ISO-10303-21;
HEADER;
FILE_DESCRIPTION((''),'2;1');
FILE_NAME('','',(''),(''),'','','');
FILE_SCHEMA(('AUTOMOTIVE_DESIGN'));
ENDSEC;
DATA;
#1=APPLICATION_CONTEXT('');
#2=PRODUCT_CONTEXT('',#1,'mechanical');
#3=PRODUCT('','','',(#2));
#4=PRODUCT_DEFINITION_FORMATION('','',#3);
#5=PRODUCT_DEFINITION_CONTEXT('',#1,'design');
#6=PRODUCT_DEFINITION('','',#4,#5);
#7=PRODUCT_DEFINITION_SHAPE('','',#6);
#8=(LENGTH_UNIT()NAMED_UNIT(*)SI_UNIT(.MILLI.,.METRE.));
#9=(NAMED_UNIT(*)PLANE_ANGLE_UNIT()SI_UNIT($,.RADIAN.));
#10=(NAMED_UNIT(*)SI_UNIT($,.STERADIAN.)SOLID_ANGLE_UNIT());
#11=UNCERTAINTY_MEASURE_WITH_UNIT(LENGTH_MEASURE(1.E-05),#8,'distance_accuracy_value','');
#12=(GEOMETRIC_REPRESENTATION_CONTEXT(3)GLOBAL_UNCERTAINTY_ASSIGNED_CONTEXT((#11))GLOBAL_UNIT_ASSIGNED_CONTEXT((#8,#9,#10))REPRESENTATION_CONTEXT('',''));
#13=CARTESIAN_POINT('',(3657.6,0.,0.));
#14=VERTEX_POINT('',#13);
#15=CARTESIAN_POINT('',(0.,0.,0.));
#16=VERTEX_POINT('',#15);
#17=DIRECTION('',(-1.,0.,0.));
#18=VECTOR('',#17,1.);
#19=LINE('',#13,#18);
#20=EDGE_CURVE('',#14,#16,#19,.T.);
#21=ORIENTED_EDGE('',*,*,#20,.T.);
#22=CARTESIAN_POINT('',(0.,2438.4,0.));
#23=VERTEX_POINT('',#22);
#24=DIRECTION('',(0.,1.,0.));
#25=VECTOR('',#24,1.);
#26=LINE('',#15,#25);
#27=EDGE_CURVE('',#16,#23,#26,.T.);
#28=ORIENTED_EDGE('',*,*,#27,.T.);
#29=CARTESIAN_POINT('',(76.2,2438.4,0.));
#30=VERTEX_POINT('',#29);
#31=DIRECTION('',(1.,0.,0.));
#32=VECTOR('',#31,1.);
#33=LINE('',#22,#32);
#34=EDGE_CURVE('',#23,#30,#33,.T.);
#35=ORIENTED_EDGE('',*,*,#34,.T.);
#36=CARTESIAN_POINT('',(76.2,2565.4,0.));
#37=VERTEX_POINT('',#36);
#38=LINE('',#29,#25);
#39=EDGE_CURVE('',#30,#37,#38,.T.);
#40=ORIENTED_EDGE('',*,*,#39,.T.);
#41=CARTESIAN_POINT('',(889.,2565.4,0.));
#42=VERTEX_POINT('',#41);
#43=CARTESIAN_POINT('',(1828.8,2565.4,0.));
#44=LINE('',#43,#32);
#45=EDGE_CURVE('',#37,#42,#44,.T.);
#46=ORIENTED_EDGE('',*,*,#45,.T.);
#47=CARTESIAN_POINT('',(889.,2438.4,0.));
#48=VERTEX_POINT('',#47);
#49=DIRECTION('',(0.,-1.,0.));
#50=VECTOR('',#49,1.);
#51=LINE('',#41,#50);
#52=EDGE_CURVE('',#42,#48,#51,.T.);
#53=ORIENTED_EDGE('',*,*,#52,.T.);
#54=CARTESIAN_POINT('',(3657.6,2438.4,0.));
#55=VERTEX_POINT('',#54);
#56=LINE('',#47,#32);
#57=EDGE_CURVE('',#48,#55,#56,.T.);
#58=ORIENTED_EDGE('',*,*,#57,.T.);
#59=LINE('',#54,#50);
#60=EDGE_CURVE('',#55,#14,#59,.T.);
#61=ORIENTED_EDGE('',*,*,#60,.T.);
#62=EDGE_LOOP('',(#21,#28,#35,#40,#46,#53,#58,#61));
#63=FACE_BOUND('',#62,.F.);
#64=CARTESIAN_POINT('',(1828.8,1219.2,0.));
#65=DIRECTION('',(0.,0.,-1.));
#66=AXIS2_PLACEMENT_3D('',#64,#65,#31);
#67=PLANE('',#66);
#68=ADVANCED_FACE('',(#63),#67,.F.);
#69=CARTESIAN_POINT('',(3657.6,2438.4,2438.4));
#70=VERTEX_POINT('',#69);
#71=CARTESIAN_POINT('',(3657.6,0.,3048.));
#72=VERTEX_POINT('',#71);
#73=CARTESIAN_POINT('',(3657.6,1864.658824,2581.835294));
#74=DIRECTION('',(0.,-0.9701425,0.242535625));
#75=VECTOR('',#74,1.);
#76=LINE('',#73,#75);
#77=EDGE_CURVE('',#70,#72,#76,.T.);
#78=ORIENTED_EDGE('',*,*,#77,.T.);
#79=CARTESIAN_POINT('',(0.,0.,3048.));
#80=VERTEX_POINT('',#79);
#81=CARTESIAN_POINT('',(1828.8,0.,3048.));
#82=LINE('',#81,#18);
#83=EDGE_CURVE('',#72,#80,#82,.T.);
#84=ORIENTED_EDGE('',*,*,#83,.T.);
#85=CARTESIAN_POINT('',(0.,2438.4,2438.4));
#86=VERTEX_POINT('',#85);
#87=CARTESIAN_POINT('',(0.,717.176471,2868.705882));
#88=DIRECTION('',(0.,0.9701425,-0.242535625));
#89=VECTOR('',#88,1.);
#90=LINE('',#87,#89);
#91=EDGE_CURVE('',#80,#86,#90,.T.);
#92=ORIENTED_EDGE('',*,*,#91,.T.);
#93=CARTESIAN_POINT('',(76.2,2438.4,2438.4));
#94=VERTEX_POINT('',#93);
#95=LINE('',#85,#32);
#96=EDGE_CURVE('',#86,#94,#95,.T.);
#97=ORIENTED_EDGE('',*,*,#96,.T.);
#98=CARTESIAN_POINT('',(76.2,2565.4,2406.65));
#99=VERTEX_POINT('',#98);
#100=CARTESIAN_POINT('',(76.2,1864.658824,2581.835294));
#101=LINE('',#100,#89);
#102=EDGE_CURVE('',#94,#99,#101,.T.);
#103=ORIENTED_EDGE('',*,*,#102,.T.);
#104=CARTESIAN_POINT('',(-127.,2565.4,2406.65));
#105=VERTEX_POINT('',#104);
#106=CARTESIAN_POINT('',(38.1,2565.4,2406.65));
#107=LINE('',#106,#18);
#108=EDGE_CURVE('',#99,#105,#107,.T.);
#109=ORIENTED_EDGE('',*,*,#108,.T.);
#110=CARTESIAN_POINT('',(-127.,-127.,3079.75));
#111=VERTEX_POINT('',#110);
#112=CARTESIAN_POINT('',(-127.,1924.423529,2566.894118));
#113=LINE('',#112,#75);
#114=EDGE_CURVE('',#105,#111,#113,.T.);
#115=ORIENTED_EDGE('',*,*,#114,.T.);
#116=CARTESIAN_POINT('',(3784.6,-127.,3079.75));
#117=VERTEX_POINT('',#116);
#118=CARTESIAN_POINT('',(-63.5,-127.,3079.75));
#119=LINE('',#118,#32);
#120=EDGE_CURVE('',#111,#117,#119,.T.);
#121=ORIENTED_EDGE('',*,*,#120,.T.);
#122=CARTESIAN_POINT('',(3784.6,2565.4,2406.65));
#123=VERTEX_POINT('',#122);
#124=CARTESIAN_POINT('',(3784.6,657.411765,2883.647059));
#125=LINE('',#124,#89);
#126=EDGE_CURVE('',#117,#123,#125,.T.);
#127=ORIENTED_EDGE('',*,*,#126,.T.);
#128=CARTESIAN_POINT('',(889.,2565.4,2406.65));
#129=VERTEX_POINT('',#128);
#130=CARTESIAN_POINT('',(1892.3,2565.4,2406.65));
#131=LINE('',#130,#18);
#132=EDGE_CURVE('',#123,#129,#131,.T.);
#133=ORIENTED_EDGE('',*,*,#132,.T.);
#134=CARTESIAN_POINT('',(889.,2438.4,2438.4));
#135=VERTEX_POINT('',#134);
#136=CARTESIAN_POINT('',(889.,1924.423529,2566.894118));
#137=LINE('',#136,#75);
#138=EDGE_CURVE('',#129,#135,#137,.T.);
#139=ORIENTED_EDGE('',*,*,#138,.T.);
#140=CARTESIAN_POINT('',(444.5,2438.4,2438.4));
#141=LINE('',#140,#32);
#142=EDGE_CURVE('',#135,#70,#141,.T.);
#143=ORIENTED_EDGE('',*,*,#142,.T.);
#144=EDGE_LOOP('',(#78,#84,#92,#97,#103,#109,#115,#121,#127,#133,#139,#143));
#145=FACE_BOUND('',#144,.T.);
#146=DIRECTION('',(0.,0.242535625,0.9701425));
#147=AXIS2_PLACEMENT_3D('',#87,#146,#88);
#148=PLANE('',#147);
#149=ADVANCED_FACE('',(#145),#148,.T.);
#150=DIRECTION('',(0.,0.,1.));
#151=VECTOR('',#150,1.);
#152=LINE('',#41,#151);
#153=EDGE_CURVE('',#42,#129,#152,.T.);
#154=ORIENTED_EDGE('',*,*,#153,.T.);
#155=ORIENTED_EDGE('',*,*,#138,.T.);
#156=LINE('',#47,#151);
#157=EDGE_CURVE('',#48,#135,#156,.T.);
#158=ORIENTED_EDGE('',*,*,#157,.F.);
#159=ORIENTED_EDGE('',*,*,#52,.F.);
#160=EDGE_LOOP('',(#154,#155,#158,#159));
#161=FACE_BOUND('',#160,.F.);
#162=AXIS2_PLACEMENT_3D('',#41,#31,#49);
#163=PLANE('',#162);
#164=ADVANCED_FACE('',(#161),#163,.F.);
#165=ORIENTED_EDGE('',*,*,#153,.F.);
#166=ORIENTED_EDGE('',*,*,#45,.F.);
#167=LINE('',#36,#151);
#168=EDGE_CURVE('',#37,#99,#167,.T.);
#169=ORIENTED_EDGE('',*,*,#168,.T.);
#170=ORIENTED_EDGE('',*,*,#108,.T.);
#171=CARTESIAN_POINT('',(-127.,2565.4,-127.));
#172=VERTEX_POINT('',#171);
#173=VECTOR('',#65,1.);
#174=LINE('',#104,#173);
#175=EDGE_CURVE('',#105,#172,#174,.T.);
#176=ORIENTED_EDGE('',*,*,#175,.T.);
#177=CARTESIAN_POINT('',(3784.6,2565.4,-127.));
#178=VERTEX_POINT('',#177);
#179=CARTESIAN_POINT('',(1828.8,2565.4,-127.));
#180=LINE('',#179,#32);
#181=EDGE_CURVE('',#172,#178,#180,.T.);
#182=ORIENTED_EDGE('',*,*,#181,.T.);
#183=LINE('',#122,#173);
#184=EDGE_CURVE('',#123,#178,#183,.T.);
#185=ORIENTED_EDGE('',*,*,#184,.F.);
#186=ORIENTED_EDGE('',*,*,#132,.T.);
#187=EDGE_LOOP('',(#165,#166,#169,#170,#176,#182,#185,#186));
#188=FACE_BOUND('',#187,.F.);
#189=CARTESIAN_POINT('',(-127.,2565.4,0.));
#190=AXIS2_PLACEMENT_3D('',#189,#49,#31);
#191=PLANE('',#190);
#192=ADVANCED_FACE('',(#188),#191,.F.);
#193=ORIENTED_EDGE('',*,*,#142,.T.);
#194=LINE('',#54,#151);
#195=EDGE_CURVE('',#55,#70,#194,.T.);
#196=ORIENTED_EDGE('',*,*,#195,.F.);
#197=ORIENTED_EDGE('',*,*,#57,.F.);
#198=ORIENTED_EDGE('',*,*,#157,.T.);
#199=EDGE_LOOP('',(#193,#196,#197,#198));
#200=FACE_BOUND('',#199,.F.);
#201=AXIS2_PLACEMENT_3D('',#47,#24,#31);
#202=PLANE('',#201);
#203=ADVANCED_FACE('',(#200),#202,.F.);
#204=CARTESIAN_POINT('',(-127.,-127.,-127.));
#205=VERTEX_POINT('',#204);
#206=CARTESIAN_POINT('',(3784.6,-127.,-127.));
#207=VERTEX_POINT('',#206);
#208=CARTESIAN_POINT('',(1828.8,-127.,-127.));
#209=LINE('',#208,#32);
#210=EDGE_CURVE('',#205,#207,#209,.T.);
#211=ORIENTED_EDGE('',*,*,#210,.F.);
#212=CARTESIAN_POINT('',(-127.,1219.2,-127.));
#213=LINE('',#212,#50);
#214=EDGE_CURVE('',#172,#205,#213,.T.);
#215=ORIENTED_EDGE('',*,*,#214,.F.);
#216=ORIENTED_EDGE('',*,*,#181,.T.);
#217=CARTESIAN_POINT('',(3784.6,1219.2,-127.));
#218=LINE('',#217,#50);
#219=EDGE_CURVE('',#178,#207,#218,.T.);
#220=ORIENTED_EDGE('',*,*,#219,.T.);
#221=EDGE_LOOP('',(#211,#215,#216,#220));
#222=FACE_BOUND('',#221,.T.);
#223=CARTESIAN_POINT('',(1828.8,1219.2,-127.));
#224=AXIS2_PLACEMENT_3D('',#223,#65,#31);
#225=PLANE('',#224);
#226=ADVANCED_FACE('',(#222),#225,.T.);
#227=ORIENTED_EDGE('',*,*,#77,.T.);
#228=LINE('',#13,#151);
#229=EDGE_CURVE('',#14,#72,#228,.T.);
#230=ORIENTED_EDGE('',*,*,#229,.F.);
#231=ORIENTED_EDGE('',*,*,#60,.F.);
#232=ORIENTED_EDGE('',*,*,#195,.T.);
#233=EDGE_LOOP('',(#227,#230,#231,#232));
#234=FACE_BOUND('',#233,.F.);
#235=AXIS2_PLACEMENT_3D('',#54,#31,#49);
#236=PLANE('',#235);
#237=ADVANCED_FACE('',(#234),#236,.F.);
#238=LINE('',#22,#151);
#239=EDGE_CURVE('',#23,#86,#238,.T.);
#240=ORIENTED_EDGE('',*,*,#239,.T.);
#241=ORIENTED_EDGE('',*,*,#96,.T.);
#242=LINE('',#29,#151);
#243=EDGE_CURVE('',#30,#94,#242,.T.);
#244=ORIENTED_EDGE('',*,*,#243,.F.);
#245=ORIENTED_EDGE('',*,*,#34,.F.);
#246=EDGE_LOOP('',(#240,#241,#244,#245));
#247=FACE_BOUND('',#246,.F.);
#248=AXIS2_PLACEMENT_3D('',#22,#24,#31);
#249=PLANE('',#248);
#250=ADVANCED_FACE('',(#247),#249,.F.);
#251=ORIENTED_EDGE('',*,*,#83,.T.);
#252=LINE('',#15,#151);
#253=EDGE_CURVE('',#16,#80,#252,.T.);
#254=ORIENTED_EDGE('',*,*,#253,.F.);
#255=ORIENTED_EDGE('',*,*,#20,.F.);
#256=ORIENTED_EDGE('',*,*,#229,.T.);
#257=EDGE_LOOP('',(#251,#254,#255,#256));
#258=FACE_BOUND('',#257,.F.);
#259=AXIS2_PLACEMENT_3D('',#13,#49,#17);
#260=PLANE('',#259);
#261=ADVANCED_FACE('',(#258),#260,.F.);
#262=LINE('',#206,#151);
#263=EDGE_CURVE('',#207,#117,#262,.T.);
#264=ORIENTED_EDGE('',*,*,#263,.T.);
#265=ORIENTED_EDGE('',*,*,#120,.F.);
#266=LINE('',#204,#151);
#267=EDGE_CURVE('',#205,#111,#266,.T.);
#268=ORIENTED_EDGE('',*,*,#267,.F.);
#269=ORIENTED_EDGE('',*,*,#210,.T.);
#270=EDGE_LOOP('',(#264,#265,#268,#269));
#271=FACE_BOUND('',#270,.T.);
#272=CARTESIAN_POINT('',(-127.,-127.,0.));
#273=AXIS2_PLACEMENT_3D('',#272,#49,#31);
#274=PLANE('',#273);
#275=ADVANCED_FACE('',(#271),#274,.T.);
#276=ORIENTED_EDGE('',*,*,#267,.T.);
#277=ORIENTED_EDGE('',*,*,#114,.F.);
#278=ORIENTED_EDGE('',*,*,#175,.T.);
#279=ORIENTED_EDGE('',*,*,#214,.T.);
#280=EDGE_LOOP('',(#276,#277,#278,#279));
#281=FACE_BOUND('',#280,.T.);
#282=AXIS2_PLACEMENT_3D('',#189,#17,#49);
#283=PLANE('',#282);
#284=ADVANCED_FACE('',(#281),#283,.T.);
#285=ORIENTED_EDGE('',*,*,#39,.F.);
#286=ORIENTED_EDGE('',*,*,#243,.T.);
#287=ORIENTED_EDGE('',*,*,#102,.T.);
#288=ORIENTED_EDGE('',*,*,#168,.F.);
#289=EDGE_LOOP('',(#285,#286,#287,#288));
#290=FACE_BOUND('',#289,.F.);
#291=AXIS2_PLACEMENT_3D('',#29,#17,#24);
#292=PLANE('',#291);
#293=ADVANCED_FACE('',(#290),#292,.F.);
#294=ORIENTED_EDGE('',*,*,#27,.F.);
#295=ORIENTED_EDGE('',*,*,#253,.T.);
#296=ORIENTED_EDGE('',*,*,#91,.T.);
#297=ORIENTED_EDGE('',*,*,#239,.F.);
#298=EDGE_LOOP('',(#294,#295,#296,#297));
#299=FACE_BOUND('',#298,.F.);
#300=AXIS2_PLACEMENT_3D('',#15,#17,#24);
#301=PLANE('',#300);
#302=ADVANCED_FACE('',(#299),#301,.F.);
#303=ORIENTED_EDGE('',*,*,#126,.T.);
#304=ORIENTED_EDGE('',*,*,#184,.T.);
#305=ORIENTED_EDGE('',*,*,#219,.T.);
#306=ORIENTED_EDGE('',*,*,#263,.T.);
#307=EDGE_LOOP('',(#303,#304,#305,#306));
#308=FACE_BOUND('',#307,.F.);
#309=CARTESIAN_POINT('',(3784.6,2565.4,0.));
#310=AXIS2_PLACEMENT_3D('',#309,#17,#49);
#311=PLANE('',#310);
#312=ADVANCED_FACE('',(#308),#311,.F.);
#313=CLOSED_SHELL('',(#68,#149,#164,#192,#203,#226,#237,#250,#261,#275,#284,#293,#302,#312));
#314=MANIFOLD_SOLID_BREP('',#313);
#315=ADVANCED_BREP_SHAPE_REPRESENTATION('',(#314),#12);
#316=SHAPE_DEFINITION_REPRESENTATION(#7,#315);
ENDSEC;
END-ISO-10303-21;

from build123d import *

# Parameters (mm, degrees)
F3_REACH = 7828.3953141922
F4_W     = 3911.6
F4_H     = 2692.4
F5_DEPTH = 127


with BuildPart() as f3:
    f3_end = Plane(origin=(0, 717.1764705882, 2868.7058823529), x_dir=(0, 0.9701425001, -0.242535625), z_dir=(0, 0.242535625, 0.9701425001))
    # F0 (on Top) → F3 (new body, up to a plane its end follows)
    with BuildSketch(Plane.XY):
        Polygon((3657.6, 0), (0, 0), (0, 2438.4), (76.2, 2438.4), (76.2, 2565.4), (-127, 2565.4), (-127, -127), (3784.6, -127), (3784.6, 2565.4), (889, 2565.4), (889, 2438.4), (3657.6, 2438.4), align=None)
    f3_long = extrude(amount=F3_REACH, mode=Mode.PRIVATE)
    add(split(f3_long, bisect_by=f3_end, keep=Keep.BOTTOM, mode=Mode.PRIVATE))

    # F4 (on face) → F5 (join)
    with BuildSketch(Plane(origin=(0, 0, 0), x_dir=(1, 0, 0), z_dir=(0, 0, -1))):
        with Locations((1828.8, -1219.2)):
            Rectangle(F4_W, F4_H)
    extrude(amount=F5_DEPTH)


solid = f3.part
